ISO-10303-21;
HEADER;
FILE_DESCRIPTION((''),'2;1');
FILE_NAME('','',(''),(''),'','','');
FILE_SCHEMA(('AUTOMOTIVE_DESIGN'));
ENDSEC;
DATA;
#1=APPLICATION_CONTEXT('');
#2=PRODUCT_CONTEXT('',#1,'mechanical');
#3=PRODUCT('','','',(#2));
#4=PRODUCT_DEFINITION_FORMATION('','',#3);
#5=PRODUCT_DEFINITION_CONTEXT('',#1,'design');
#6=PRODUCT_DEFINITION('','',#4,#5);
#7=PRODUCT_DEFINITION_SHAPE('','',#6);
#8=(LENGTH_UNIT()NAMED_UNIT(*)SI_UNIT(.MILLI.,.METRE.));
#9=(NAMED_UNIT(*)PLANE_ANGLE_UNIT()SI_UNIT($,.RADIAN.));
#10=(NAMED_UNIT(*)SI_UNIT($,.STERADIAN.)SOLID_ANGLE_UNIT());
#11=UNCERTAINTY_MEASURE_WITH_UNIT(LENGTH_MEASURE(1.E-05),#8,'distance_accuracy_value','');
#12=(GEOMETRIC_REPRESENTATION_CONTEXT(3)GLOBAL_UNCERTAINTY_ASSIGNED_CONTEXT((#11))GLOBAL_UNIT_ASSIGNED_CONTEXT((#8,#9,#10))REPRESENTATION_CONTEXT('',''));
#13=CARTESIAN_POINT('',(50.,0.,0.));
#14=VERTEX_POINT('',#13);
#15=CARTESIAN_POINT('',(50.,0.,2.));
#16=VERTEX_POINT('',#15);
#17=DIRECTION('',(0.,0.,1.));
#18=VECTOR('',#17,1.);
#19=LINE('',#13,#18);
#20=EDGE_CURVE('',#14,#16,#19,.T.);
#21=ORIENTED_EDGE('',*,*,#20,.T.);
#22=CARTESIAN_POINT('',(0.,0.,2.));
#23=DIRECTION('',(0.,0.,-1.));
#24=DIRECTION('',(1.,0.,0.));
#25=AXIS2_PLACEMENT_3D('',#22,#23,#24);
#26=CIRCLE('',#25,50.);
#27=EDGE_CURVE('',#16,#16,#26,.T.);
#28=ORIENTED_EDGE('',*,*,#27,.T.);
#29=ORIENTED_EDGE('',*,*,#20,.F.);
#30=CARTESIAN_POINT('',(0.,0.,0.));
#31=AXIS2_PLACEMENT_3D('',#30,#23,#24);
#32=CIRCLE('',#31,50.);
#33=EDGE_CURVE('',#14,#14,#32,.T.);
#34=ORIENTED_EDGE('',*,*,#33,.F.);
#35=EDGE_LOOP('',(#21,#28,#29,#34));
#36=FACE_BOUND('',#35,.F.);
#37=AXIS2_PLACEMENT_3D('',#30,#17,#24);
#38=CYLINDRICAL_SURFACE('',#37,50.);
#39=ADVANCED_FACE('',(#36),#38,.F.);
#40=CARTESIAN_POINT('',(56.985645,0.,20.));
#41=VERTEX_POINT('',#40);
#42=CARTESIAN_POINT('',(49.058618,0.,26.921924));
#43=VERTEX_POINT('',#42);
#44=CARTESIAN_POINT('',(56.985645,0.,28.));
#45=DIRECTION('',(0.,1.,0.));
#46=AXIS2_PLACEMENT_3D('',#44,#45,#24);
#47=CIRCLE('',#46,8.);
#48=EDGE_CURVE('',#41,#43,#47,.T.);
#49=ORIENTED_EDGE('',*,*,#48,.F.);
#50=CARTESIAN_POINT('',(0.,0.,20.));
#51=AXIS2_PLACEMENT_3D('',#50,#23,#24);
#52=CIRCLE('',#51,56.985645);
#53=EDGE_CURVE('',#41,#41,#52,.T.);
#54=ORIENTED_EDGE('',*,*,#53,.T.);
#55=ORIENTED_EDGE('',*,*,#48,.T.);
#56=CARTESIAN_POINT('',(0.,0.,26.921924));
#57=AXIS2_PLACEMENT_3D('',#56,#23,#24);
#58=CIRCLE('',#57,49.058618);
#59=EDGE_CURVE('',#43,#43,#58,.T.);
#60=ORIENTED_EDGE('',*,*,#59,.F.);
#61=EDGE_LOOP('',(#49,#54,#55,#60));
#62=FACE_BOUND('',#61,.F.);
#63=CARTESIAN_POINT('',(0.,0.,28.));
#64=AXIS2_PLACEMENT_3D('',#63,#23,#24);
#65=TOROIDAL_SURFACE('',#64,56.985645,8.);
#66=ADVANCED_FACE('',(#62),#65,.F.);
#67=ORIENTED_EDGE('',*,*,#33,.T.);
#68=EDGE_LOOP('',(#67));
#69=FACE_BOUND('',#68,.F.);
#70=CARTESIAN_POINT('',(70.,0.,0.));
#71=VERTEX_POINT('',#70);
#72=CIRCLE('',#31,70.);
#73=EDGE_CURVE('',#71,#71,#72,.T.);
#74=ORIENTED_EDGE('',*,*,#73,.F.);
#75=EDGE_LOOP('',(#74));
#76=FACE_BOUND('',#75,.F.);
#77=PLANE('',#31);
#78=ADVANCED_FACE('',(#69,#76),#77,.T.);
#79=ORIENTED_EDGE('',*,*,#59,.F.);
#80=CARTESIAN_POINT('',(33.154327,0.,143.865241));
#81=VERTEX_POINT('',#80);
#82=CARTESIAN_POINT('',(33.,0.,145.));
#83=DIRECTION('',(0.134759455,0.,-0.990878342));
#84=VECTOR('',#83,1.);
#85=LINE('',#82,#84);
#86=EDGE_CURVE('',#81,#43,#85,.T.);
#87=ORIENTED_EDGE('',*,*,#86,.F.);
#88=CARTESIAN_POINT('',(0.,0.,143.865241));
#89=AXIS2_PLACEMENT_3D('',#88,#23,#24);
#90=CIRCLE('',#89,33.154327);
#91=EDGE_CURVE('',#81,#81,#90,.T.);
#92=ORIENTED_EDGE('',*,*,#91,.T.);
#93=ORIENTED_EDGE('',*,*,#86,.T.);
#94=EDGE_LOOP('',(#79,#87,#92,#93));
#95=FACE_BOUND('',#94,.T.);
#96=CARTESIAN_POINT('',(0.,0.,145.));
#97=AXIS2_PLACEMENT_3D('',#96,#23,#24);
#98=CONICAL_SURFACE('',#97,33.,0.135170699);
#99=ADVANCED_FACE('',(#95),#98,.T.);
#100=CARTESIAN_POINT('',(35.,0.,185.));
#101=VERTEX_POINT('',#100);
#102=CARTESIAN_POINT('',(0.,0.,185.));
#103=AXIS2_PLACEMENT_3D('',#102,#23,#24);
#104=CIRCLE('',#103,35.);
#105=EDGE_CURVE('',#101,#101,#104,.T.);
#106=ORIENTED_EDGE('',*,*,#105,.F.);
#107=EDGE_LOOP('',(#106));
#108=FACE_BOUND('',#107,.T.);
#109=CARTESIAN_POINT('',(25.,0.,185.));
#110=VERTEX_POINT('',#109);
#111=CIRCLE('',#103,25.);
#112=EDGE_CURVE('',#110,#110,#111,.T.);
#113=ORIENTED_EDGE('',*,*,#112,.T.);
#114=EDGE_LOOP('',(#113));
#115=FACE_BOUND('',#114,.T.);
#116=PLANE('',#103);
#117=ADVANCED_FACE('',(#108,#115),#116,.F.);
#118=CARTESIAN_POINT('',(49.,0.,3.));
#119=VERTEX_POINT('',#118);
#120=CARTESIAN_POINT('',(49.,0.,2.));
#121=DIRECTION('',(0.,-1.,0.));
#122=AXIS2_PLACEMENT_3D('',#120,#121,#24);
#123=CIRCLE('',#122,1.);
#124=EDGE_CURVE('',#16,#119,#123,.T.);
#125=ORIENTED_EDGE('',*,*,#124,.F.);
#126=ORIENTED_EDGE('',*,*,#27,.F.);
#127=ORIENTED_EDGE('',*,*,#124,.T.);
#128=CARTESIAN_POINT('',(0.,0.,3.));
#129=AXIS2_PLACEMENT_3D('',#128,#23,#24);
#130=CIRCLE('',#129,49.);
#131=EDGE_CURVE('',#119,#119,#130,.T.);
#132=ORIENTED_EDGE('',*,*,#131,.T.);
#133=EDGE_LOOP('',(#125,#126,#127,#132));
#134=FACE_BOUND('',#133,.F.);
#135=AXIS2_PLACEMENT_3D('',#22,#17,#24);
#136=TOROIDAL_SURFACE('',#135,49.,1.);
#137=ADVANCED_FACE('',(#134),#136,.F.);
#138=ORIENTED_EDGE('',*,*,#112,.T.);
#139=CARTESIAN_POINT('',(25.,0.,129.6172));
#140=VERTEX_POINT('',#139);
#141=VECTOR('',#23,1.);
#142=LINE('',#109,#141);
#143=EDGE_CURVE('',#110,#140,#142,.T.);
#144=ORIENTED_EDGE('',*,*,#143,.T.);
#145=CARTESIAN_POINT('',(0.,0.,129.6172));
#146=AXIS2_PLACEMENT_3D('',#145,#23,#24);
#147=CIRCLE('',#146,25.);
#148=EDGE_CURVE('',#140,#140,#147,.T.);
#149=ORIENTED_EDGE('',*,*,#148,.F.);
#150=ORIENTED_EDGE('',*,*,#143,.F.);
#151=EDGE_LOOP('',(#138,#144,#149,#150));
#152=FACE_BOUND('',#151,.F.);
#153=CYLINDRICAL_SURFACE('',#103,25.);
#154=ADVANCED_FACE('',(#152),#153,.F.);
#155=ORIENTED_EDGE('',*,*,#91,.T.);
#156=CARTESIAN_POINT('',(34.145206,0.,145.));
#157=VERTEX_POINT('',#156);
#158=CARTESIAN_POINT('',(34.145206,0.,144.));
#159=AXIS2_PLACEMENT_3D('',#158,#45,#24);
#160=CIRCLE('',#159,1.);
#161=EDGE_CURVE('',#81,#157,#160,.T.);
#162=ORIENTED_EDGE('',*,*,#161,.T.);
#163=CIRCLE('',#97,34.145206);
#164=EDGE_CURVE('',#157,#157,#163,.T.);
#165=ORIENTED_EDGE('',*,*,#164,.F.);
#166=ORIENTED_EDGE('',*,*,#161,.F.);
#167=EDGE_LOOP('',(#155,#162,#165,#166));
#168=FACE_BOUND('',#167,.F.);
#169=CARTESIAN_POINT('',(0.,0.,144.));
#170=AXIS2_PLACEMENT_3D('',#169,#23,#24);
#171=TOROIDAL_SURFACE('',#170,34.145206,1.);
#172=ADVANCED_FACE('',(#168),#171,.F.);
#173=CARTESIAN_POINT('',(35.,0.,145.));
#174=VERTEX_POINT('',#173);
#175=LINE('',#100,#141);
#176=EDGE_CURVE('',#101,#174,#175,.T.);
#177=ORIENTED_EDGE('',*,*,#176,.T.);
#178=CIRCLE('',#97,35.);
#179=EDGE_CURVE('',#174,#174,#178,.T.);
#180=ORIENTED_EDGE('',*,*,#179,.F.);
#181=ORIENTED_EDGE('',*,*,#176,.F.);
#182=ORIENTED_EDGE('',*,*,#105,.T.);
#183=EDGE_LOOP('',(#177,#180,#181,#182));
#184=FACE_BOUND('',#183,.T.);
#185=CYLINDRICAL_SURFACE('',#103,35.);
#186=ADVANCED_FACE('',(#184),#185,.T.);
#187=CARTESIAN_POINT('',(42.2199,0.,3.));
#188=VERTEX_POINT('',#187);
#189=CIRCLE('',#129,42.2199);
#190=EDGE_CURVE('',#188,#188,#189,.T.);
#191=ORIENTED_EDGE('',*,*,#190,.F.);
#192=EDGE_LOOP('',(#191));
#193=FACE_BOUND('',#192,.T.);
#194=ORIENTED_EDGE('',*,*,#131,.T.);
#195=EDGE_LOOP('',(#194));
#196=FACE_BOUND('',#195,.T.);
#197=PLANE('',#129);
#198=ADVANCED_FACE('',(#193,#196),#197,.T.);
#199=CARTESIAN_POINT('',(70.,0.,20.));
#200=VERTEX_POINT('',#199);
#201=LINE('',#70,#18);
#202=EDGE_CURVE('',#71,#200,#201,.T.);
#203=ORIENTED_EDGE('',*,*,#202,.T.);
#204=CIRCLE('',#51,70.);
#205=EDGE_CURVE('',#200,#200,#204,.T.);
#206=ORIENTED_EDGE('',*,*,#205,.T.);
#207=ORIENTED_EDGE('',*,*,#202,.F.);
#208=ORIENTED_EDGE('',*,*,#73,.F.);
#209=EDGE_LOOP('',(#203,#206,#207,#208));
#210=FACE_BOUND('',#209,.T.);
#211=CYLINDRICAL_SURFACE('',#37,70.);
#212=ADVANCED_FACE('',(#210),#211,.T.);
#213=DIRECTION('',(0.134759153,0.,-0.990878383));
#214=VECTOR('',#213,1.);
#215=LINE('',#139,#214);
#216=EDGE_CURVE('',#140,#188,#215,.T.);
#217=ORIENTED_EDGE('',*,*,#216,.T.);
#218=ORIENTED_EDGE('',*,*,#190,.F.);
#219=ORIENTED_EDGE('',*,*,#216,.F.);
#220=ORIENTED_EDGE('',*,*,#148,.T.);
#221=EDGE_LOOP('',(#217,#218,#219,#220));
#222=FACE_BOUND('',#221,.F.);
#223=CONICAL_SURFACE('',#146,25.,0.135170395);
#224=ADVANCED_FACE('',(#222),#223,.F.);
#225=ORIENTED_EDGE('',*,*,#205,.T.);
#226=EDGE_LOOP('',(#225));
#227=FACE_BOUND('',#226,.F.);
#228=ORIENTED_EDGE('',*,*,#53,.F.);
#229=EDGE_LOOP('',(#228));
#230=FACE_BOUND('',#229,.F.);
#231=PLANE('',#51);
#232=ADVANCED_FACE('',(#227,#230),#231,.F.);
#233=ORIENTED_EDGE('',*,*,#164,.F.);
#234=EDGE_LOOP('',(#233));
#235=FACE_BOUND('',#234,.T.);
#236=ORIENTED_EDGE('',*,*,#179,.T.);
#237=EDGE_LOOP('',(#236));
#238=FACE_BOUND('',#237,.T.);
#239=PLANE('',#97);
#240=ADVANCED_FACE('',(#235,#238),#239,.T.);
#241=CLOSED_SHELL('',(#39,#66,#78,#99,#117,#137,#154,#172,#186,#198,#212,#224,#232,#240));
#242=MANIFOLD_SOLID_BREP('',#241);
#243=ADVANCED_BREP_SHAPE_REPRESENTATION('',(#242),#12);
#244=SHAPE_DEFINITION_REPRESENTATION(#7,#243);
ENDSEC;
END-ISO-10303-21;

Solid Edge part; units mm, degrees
sketch "Sketch1" plane through (0, 0, 0) normal (0, -1, 0) x (1, 0, 0)
  line L0 (25, 185) -> (25, 129.6172)
  line L1 (25, 129.6172) -> (42.2199, 3)
  line L2 (50, 3) -> (42.2199, 3)
  line L3 (50, 0) -> (50, 3)
  line L4 (50, 0) -> (70, 0)
  line L5 (70, 0) -> (70, 20)
  line L6 (70, 20) -> (50, 20)
  line L7 (33, 145) -> (50, 20)
  line L8 (35, 145) -> (33, 145)
  line L9 (35, 185) -> (35, 145)
  line L10 (25, 185) -> (35, 185)
  dimension "D1" = 70
  dimension "D2" = 50
  dimension "D3" = 185
  dimension "D4" = 25
  dimension "D5" = 35
  dimension "D6" = 20
  dimension "D7" = 20
  dimension "D8" = 10
revolve "RevolvedProtrusion1" add sketch "Sketch1" angle 360 about axis through (0, 0, 54) along (0, 0, -1)
fillet "Round1" radius 8 1 edges at (-50, 0, 20)
fillet "Round_2" radius 1 1 edges at (-50, 0, 3)
fillet "Round_3" radius 1 1 edges at (-33, 0, 145)
